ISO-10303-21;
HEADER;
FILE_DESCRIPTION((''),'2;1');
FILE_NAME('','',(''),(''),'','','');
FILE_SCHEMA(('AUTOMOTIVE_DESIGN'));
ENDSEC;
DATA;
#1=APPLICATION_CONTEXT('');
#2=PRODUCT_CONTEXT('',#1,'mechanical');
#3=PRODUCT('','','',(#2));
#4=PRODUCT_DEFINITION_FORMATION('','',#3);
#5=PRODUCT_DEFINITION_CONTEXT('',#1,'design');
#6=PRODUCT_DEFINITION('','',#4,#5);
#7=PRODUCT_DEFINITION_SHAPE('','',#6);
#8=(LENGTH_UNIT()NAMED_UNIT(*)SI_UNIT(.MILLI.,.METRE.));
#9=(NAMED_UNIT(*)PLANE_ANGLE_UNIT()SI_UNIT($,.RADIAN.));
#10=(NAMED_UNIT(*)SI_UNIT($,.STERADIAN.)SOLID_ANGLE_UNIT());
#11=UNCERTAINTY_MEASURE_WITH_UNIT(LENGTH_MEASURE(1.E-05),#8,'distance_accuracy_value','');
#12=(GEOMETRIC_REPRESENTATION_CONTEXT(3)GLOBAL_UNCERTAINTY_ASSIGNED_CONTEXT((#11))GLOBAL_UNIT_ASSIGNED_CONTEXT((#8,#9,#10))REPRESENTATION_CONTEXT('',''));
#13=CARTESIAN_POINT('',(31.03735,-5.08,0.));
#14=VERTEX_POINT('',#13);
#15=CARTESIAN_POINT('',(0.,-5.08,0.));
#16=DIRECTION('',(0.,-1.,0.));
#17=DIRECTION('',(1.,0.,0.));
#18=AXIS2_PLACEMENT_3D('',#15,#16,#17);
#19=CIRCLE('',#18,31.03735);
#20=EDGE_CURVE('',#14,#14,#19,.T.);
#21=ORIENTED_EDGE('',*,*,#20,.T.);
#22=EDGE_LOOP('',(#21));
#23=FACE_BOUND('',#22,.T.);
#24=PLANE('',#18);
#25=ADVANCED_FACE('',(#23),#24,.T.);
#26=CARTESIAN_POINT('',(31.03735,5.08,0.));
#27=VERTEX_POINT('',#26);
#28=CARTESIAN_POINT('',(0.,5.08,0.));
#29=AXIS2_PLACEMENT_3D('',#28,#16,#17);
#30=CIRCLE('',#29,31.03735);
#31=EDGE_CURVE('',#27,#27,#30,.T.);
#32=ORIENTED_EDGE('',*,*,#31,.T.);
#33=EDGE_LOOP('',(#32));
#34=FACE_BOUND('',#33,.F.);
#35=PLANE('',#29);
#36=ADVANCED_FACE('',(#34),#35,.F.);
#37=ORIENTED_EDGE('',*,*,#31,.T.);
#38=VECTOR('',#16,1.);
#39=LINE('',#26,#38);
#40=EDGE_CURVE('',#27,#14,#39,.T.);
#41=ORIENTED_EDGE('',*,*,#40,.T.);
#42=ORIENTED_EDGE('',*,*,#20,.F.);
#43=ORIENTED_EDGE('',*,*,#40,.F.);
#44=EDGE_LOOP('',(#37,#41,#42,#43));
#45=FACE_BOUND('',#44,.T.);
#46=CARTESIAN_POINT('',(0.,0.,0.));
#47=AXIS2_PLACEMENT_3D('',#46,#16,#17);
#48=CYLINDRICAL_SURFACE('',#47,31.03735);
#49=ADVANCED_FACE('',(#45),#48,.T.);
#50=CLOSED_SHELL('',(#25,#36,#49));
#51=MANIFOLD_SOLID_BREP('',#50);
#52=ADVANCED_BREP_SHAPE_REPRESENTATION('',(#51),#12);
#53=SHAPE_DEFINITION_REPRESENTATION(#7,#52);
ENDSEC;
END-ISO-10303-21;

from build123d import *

# Parameters (mm, degrees)
F2_R          = 31.0373499358
F3_DEPTH      = 5.08
F3_DEPTH_BACK = 5.08


# Not quite as in the source:
# - the program builds the solid bodies; features that only make, move or delete a surface that nothing else refers to are left out


with BuildPart() as f3:
    # F2 (on Front) → F3 (new body, two sides)
    with BuildSketch(Plane.XZ) as f3_sk:
        Circle(F2_R)
    extrude(amount=F3_DEPTH)
    extrude(f3_sk.sketch, amount=-F3_DEPTH_BACK)


solid = f3.part
